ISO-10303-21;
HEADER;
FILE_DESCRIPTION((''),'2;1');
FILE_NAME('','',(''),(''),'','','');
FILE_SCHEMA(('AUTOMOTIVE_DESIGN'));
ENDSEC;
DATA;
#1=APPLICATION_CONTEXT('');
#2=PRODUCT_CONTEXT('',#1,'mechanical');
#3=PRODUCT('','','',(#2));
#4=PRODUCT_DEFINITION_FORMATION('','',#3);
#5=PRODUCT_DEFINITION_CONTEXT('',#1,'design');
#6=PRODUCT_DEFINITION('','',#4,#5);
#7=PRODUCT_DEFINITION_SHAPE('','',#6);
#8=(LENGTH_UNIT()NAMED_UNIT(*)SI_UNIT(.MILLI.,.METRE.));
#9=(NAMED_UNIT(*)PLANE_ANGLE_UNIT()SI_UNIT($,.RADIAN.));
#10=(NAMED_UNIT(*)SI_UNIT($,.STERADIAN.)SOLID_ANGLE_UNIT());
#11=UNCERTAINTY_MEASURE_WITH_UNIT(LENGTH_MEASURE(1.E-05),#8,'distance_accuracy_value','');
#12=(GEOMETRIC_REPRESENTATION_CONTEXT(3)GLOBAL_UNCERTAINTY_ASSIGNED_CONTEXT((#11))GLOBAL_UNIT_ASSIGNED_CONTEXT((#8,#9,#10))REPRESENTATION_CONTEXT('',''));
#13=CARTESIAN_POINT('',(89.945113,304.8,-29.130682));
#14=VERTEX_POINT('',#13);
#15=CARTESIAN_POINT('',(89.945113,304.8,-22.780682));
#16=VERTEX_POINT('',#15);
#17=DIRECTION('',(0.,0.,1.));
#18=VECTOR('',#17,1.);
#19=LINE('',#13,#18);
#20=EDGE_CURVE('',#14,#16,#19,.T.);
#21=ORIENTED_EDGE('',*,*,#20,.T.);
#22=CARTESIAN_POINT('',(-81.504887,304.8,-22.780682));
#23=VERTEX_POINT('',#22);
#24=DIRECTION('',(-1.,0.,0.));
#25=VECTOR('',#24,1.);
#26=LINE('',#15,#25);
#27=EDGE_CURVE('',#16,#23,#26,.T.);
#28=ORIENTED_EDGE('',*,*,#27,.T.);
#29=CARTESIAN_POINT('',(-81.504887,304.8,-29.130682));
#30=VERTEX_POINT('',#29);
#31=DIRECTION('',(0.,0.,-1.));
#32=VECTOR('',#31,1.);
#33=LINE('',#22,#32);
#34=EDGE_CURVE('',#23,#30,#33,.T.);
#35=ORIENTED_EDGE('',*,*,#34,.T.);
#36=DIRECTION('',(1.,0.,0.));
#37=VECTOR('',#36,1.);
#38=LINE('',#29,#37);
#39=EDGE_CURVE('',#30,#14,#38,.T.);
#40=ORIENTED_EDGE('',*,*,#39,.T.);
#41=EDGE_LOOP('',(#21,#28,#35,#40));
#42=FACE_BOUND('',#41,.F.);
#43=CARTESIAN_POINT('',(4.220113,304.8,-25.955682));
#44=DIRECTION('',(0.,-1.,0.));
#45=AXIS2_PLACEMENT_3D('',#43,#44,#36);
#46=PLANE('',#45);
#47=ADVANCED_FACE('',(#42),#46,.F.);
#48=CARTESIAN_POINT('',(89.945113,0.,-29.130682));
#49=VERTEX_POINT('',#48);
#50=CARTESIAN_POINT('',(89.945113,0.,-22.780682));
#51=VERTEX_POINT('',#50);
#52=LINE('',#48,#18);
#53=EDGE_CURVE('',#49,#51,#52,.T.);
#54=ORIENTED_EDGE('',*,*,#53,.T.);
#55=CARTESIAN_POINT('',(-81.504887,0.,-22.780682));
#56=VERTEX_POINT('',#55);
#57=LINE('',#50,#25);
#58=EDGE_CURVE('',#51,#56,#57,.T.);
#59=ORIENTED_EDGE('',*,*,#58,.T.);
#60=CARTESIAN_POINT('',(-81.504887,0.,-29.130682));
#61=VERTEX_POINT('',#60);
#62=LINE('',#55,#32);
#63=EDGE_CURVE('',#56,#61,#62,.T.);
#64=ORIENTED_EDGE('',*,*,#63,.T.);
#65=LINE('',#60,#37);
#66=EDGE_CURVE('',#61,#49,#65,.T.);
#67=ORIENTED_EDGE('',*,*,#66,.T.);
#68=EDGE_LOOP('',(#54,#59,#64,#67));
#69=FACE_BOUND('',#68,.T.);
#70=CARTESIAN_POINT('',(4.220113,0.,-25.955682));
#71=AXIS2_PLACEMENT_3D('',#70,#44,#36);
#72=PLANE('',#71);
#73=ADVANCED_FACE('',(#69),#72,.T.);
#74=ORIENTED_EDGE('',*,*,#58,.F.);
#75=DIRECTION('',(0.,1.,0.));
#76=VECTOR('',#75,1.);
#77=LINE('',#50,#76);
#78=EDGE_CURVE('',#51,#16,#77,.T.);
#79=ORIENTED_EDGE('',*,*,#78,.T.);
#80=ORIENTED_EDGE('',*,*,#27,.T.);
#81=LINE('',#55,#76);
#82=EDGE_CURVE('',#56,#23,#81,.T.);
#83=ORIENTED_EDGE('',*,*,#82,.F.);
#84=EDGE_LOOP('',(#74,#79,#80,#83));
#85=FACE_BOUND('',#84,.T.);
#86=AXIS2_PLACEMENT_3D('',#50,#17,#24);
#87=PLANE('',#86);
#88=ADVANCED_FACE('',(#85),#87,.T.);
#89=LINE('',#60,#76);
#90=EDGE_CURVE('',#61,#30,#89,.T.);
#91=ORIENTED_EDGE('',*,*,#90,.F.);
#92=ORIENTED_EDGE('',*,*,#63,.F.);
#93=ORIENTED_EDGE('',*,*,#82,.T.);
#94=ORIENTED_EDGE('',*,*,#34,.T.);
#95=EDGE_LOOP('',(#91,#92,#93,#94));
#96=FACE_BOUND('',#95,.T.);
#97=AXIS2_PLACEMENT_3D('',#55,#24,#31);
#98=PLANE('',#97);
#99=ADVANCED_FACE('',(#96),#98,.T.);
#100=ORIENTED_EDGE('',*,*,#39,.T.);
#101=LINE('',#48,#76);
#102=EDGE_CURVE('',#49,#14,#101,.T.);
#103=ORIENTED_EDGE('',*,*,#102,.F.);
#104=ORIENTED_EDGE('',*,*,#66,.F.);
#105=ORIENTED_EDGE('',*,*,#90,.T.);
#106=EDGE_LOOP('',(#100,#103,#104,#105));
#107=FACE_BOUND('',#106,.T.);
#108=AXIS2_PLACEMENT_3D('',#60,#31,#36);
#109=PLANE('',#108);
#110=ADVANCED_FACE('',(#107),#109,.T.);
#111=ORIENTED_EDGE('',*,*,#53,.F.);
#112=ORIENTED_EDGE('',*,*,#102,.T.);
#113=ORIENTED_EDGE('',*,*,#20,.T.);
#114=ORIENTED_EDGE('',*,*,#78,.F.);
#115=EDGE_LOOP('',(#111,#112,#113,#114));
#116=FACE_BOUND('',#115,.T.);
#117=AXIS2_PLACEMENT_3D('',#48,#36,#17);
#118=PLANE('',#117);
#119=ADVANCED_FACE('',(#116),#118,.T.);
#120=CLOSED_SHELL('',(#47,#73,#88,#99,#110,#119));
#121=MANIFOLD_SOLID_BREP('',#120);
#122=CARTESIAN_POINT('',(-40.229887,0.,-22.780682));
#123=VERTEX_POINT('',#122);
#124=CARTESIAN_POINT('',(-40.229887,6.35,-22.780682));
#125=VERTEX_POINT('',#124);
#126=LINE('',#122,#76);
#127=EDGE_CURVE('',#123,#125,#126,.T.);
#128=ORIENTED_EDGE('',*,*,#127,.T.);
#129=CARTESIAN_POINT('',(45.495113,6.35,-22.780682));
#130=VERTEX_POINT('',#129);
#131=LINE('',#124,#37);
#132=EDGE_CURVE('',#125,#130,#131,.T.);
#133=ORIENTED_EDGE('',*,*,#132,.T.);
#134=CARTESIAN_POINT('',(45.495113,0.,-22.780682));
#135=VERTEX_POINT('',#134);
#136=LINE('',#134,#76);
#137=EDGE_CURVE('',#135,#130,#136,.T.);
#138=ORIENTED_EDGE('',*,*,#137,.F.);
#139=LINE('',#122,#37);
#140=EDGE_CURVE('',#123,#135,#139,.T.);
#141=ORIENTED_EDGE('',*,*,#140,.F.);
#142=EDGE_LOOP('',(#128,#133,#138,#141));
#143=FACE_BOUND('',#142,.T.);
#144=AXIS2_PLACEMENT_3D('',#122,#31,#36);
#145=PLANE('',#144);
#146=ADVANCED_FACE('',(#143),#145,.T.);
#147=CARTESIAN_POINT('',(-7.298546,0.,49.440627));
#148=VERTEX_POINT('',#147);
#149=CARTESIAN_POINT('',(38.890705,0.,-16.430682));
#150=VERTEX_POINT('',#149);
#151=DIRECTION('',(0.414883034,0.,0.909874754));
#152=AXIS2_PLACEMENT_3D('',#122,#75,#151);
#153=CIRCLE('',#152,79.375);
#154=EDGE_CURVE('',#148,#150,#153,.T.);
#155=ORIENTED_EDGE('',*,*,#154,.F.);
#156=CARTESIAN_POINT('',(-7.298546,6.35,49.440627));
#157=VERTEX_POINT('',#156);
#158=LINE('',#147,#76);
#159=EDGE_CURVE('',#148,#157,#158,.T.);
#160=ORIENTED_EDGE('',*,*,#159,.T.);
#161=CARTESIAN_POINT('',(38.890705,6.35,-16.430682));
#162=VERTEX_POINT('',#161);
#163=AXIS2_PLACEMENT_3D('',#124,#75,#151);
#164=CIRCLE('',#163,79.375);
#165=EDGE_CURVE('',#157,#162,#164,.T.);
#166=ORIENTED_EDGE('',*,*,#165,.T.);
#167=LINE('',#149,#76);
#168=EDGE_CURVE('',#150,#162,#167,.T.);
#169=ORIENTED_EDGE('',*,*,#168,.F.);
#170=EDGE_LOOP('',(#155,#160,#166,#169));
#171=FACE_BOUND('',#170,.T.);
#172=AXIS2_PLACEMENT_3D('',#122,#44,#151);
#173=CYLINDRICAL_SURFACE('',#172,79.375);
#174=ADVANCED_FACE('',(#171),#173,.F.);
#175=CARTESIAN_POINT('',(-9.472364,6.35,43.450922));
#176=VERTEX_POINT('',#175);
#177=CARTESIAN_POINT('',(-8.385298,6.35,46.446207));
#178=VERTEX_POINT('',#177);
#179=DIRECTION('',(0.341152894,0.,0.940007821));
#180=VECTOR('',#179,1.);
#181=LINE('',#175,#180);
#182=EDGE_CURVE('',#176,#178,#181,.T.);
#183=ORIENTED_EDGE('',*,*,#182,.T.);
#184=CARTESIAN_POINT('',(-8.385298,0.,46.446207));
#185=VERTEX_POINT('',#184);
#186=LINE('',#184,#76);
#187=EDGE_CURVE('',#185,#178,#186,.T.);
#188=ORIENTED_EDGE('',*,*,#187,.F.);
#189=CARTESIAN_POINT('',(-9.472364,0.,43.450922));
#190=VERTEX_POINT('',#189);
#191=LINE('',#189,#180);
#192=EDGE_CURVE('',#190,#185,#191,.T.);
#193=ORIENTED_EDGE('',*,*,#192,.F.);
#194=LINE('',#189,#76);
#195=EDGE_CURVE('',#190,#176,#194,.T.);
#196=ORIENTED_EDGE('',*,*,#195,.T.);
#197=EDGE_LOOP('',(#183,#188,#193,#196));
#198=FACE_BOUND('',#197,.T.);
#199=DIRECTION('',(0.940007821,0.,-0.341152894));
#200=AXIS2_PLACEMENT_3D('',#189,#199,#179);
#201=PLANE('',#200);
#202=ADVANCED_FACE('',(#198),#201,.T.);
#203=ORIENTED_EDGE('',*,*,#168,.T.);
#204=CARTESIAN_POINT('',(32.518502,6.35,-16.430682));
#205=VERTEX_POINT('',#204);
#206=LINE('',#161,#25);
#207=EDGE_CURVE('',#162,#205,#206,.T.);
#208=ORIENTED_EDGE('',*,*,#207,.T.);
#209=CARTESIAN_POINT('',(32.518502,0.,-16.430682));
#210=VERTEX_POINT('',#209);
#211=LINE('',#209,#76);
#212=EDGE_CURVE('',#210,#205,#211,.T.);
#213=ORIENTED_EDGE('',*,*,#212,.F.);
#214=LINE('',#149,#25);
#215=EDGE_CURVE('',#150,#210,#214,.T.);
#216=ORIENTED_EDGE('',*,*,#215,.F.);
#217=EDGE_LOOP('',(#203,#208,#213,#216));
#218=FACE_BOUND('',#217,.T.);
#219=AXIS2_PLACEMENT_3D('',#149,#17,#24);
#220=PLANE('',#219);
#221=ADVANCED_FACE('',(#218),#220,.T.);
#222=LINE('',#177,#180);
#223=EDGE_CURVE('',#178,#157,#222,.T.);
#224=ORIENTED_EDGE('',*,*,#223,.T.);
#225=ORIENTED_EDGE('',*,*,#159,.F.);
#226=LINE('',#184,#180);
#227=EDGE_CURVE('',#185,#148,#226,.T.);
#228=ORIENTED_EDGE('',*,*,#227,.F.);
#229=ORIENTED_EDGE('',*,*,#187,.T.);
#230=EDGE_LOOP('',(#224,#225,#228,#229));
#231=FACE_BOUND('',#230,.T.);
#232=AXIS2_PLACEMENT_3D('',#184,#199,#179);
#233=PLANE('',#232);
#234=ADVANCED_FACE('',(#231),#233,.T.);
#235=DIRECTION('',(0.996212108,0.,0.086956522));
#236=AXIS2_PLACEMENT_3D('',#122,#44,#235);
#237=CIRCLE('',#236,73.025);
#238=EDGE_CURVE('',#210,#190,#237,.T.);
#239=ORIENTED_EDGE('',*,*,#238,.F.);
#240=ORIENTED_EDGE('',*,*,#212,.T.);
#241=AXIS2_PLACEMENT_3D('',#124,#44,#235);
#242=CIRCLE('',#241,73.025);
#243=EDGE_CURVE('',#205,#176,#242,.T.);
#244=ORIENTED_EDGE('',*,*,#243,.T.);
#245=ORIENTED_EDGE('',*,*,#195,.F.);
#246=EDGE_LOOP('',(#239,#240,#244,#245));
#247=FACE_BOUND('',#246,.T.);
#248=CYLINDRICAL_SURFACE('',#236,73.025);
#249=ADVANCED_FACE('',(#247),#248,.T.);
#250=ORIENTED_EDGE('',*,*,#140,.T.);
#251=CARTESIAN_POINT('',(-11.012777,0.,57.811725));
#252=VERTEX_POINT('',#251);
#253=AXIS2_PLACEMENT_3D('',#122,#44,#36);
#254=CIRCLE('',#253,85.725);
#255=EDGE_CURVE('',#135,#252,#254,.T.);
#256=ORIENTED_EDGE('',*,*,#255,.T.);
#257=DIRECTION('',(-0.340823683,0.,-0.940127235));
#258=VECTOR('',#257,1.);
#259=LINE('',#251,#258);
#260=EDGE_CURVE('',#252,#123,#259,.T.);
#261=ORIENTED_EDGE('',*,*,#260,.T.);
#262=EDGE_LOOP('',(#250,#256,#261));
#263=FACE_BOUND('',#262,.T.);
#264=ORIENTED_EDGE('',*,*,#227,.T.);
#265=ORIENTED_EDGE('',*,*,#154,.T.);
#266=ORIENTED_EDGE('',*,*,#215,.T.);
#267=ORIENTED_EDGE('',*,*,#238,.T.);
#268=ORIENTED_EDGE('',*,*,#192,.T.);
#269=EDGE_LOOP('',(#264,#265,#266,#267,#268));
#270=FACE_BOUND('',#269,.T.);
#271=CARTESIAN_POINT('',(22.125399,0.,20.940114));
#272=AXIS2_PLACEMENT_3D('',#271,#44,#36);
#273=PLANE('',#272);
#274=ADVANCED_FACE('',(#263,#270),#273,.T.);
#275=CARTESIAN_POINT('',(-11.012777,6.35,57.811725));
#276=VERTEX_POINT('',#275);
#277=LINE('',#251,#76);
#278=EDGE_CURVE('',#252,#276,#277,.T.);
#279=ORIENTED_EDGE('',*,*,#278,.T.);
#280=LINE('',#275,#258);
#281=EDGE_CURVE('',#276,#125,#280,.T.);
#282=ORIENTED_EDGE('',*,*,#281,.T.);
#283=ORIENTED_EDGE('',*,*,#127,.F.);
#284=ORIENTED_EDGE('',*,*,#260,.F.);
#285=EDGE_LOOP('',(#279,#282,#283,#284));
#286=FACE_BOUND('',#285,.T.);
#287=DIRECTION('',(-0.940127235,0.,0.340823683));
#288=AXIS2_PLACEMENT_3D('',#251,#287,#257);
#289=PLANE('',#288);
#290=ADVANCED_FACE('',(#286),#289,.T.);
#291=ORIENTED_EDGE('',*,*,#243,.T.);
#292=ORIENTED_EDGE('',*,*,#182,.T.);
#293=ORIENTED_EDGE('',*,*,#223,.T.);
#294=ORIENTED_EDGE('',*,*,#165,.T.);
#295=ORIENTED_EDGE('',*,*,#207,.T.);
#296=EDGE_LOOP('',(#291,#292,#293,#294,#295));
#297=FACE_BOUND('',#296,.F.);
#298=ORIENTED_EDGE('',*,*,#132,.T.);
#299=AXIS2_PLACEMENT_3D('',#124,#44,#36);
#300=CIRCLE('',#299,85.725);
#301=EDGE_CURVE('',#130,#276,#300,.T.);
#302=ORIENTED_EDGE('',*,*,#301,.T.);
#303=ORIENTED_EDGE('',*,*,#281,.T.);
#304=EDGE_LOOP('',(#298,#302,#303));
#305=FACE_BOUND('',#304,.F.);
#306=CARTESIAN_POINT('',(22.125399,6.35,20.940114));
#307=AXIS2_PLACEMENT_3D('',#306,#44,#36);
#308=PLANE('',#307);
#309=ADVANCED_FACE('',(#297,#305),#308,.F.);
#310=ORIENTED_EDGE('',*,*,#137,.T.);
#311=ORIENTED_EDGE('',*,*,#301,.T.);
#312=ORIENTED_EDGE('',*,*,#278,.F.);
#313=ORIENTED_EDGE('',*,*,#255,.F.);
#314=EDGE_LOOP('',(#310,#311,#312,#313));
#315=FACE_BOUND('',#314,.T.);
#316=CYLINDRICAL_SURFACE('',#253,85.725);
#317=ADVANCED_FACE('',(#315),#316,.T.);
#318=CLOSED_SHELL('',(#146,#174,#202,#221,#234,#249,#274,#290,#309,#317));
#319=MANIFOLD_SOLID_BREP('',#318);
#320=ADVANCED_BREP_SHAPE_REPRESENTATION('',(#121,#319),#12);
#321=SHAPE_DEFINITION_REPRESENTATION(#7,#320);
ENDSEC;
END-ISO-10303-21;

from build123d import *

# Parameters (mm, degrees)
F2_DEPTH = 6.35
F3_DEPTH = 304.8


# Not quite as in the source:
# - a feature names something its author has since deleted; it is built from what else it names


with BuildPart() as f2:
    # F0 (on Front) → F2 (new body)
    with BuildSketch(Plane.XZ):
        with BuildLine():
            Line((39.1451127164, -22.7806820739), (45.4951127164, -22.7806820739))
            ThreePointArc((45.4951127164, -22.7806820739), (29.9606120641, 26.4338424724), (-11.012777078, 57.8117251134))
            Line((-11.012777078, 57.8117251134), (-13.1770074636, 51.8419171736))
            ThreePointArc((-13.1770074636, 51.8419171736), (-10.2137544615, 50.700080003), (-7.2985464975, 49.4406265478))
            ThreePointArc((-7.2985464975, 49.4406265478), (24.7598523038, 22.7904093477), (38.8907050107, -16.4306820739))
            ThreePointArc((38.8907050107, -16.4306820739), (39.0814852879, -19.603134935), (39.1451127164, -22.7806820739))
        make_face()
        with BuildLine():
            Line((-13.1770074636, 51.8419171736), (-15.3412378492, 45.8721092338))
            ThreePointArc((-15.3412378492, 45.8721092338), (-12.380476471, 44.7253246395), (-9.472363604, 43.4509218784))
            Line((-9.472363604, 43.4509218784), (-8.3852980682, 46.4462067606))
            Line((-8.3852980682, 46.4462067606), (-7.2985464975, 49.4406265478))
            ThreePointArc((-7.2985464975, 49.4406265478), (-10.2137544615, 50.700080003), (-13.1770074636, 51.8419171736))
        make_face()
        with BuildLine():
            Line((-15.3412378492, 45.8721092338), (-40.2298872836, -22.7806820739))
            Line((-40.2298872836, -22.7806820739), (-11.6548872836, -22.7806820739))
            Line((-11.6548872836, -22.7806820739), (32.7951127164, -22.7806820739))
            ThreePointArc((32.7951127164, -22.7806820739), (32.7259272318, -19.6026711567), (32.5185018738, -16.4306820739))
            ThreePointArc((32.5185018738, -16.4306820739), (19.5599121895, 19.1458072135), (-9.472363604, 43.4509218784))
            ThreePointArc((-9.472363604, 43.4509218784), (-12.380476471, 44.7253246395), (-15.3412378492, 45.8721092338))
        make_face()
        with BuildLine():
            Line((35.9701127164, -22.7806820739), (39.1451127164, -22.7806820739))
            ThreePointArc((39.1451127164, -22.7806820739), (39.0814852879, -19.603134935), (38.8907050107, -16.4306820739))
            Line((38.8907050107, -16.4306820739), (35.7050684351, -16.4306820739))
            Line((35.7050684351, -16.4306820739), (35.7046034422, -16.4306820739))
            Line((35.7046034422, -16.4306820739), (32.5185018738, -16.4306820739))
            ThreePointArc((32.5185018738, -16.4306820739), (32.7259272318, -19.6026711567), (32.7951127164, -22.7806820739))
            Line((32.7951127164, -22.7806820739), (35.9701127164, -22.7806820739))
        make_face()
    extrude(amount=-F2_DEPTH)


with BuildPart() as f3:
    # F0 (on Front) → F3 (new body)
    with BuildSketch(Plane.XZ):
        Polygon((-81.5048872836, -22.7806820739), (-81.5048872836, -29.1306820739), (89.9451127164, -29.1306820739), (89.9451127164, -22.7806820739), (45.4951127164, -22.7806820739), (39.1451127164, -22.7806820739), (35.9701127164, -22.7806820739), (32.7951127164, -22.7806820739), (-11.6548872836, -22.7806820739), (-40.2298872836, -22.7806820739), align=None)
    extrude(amount=-F3_DEPTH)


solid = Compound([f2.part, f3.part])
